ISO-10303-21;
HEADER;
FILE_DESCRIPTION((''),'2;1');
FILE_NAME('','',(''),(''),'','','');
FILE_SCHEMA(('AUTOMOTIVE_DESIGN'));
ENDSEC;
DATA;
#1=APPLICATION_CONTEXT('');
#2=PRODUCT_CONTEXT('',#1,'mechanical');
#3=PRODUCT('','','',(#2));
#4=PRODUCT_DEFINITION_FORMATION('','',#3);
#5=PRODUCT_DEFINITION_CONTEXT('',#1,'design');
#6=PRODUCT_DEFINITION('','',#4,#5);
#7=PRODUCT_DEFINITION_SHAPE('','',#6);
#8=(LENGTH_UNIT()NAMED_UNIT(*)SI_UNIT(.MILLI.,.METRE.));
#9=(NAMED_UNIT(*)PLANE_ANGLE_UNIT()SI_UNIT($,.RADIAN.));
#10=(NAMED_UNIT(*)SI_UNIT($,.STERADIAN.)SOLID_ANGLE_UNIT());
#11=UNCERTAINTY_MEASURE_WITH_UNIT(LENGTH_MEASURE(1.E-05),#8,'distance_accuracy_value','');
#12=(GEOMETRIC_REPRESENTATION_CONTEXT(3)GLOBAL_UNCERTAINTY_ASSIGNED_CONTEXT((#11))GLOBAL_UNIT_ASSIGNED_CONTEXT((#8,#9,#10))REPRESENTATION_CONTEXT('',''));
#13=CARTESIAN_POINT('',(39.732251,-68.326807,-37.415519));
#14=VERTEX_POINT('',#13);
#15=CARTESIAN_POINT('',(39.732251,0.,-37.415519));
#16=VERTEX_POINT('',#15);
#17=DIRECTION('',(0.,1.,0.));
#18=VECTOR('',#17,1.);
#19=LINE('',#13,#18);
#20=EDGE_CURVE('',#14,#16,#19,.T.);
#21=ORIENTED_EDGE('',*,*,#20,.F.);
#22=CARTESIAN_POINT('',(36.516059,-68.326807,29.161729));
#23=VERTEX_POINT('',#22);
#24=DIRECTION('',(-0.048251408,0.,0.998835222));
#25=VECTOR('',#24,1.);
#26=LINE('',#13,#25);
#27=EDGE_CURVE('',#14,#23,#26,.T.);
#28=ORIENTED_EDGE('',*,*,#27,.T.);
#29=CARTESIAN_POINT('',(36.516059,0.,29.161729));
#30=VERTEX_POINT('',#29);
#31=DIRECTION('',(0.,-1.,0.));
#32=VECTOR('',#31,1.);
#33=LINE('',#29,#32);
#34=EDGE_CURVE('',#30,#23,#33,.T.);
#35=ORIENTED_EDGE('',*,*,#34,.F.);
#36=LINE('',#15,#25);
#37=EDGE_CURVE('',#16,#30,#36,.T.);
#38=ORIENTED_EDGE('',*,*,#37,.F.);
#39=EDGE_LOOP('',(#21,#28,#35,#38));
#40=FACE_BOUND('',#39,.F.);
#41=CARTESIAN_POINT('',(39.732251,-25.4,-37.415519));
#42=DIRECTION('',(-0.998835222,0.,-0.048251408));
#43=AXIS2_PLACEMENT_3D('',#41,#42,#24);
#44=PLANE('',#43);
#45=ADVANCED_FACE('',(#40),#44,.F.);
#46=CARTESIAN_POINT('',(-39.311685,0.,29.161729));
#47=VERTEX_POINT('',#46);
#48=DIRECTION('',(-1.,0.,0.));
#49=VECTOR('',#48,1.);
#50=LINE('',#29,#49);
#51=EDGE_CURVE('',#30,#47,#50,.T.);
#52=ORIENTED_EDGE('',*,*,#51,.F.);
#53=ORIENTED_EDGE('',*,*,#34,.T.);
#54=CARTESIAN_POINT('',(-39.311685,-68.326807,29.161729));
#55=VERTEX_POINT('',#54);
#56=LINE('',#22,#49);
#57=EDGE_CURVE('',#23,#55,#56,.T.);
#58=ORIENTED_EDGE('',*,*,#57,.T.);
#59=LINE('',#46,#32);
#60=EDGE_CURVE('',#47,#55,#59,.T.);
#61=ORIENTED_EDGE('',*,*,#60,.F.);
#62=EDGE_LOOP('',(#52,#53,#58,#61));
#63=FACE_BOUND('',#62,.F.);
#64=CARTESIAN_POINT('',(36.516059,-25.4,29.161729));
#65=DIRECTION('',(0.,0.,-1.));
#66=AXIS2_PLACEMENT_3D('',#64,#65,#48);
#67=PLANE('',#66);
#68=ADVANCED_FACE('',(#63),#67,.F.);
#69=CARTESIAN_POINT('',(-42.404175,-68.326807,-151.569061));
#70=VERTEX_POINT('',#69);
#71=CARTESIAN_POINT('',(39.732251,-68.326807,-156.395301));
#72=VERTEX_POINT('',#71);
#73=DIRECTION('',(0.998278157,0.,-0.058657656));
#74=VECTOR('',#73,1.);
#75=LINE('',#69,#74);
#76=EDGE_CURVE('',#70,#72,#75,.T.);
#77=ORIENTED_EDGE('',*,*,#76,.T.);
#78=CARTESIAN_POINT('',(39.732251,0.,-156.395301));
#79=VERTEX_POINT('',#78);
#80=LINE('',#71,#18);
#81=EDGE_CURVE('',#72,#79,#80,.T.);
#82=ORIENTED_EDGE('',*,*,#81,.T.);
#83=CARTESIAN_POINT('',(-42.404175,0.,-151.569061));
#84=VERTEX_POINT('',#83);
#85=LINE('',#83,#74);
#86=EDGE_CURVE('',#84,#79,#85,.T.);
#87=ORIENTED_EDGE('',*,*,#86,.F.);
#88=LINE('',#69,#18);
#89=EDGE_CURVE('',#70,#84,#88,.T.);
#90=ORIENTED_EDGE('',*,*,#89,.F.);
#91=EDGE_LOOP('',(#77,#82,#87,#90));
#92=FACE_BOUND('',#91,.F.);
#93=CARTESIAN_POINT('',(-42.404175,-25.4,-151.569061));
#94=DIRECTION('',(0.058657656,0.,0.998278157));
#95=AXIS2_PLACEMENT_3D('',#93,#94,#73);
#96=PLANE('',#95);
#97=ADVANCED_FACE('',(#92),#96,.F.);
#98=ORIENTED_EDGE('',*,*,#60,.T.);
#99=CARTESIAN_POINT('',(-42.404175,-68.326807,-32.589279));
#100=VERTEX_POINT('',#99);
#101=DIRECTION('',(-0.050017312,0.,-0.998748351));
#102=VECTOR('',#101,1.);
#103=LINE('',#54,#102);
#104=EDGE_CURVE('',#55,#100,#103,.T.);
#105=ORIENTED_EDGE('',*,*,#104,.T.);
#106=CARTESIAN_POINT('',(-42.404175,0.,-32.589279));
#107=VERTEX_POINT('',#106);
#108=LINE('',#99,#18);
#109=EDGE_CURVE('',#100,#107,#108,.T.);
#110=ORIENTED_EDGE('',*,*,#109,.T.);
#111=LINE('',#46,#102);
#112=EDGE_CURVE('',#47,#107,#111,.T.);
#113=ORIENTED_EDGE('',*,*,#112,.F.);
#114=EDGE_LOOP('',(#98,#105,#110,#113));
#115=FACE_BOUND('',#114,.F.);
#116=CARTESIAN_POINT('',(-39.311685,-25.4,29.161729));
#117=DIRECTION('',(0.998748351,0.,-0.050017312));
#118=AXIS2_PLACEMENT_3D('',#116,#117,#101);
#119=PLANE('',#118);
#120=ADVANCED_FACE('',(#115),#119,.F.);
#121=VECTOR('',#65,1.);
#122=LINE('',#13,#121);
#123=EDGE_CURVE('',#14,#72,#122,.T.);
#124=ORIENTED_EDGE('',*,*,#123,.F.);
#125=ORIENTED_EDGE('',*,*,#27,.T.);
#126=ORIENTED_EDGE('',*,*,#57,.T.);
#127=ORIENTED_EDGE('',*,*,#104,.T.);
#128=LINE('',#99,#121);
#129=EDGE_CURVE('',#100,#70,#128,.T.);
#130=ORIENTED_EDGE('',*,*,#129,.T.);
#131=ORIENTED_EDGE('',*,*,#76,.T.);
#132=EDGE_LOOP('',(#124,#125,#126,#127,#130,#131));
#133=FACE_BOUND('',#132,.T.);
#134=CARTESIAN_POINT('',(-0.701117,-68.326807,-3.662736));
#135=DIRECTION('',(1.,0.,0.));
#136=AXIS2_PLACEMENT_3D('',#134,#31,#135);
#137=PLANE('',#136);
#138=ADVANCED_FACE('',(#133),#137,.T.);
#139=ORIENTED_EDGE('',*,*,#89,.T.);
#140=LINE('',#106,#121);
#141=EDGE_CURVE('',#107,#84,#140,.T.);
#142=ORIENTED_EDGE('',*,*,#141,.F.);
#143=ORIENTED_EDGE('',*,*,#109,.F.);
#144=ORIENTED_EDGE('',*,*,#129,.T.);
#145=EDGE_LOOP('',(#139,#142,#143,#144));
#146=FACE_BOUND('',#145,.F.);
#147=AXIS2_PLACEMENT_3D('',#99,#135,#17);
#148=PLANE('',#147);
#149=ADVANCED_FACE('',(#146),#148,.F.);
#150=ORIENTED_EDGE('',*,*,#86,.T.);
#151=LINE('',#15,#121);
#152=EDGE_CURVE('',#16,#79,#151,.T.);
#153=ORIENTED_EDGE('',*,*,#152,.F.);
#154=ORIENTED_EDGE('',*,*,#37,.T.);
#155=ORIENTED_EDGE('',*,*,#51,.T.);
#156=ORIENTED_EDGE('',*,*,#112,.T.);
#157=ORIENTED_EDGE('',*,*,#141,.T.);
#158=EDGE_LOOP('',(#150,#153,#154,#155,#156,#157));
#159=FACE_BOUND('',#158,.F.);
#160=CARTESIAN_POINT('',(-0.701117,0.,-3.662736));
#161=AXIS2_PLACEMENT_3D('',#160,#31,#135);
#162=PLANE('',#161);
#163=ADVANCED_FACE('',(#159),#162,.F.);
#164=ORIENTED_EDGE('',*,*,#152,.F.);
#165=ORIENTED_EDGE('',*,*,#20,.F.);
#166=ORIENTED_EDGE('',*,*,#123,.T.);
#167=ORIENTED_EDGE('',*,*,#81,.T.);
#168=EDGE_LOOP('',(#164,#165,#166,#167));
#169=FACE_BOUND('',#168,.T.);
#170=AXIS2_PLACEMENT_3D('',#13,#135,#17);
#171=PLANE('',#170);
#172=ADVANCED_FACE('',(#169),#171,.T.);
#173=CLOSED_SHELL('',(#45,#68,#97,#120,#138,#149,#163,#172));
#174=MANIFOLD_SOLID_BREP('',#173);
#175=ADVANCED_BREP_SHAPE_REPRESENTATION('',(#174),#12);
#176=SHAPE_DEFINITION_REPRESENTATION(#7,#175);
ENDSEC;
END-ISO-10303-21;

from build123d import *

# Parameters (mm, degrees)
F1_DEPTH = 25.4
F2_DEPTH = 42.9268069565
F3_DEPTH = 118.9797818661


# Not quite as in the source:
# - the program builds the solid bodies; features that only make, move or delete a surface that nothing else refers to are left out


with BuildPart() as f1:
    # F0 (on Front) → F1 (new body)
    with BuildSketch(Plane.XZ):
        Polygon((39.7322513163, -37.4155193567), (36.51605919, 29.1617289186), (-39.3116846681, 29.1617289186), (-42.4041748047, -32.5892791152), align=None)
    extrude(amount=F1_DEPTH)

    # F2 (add): a face of the model
    f2_faces = [f1.faces().sort_by_distance(p)[0] for p in [
        (-0.8911665314, -25.4, -3.3616464638),
    ]]
    extrude(f2_faces, amount=F2_DEPTH)

    # F3 (add): faces of the model
    f3_faces = [f1.faces().sort_by_distance(p)[0] for p in [
        (-1.397812739, -34.1634034783, 29.1617289186),
        (38.1241552532, -34.1634034783, -4.1268952191),
        (-1.3359617442, -34.1634034783, -35.002399236),
    ]]
    extrude(f3_faces, amount=-F3_DEPTH, dir=(0, 0, 1))


solid = f1.part
